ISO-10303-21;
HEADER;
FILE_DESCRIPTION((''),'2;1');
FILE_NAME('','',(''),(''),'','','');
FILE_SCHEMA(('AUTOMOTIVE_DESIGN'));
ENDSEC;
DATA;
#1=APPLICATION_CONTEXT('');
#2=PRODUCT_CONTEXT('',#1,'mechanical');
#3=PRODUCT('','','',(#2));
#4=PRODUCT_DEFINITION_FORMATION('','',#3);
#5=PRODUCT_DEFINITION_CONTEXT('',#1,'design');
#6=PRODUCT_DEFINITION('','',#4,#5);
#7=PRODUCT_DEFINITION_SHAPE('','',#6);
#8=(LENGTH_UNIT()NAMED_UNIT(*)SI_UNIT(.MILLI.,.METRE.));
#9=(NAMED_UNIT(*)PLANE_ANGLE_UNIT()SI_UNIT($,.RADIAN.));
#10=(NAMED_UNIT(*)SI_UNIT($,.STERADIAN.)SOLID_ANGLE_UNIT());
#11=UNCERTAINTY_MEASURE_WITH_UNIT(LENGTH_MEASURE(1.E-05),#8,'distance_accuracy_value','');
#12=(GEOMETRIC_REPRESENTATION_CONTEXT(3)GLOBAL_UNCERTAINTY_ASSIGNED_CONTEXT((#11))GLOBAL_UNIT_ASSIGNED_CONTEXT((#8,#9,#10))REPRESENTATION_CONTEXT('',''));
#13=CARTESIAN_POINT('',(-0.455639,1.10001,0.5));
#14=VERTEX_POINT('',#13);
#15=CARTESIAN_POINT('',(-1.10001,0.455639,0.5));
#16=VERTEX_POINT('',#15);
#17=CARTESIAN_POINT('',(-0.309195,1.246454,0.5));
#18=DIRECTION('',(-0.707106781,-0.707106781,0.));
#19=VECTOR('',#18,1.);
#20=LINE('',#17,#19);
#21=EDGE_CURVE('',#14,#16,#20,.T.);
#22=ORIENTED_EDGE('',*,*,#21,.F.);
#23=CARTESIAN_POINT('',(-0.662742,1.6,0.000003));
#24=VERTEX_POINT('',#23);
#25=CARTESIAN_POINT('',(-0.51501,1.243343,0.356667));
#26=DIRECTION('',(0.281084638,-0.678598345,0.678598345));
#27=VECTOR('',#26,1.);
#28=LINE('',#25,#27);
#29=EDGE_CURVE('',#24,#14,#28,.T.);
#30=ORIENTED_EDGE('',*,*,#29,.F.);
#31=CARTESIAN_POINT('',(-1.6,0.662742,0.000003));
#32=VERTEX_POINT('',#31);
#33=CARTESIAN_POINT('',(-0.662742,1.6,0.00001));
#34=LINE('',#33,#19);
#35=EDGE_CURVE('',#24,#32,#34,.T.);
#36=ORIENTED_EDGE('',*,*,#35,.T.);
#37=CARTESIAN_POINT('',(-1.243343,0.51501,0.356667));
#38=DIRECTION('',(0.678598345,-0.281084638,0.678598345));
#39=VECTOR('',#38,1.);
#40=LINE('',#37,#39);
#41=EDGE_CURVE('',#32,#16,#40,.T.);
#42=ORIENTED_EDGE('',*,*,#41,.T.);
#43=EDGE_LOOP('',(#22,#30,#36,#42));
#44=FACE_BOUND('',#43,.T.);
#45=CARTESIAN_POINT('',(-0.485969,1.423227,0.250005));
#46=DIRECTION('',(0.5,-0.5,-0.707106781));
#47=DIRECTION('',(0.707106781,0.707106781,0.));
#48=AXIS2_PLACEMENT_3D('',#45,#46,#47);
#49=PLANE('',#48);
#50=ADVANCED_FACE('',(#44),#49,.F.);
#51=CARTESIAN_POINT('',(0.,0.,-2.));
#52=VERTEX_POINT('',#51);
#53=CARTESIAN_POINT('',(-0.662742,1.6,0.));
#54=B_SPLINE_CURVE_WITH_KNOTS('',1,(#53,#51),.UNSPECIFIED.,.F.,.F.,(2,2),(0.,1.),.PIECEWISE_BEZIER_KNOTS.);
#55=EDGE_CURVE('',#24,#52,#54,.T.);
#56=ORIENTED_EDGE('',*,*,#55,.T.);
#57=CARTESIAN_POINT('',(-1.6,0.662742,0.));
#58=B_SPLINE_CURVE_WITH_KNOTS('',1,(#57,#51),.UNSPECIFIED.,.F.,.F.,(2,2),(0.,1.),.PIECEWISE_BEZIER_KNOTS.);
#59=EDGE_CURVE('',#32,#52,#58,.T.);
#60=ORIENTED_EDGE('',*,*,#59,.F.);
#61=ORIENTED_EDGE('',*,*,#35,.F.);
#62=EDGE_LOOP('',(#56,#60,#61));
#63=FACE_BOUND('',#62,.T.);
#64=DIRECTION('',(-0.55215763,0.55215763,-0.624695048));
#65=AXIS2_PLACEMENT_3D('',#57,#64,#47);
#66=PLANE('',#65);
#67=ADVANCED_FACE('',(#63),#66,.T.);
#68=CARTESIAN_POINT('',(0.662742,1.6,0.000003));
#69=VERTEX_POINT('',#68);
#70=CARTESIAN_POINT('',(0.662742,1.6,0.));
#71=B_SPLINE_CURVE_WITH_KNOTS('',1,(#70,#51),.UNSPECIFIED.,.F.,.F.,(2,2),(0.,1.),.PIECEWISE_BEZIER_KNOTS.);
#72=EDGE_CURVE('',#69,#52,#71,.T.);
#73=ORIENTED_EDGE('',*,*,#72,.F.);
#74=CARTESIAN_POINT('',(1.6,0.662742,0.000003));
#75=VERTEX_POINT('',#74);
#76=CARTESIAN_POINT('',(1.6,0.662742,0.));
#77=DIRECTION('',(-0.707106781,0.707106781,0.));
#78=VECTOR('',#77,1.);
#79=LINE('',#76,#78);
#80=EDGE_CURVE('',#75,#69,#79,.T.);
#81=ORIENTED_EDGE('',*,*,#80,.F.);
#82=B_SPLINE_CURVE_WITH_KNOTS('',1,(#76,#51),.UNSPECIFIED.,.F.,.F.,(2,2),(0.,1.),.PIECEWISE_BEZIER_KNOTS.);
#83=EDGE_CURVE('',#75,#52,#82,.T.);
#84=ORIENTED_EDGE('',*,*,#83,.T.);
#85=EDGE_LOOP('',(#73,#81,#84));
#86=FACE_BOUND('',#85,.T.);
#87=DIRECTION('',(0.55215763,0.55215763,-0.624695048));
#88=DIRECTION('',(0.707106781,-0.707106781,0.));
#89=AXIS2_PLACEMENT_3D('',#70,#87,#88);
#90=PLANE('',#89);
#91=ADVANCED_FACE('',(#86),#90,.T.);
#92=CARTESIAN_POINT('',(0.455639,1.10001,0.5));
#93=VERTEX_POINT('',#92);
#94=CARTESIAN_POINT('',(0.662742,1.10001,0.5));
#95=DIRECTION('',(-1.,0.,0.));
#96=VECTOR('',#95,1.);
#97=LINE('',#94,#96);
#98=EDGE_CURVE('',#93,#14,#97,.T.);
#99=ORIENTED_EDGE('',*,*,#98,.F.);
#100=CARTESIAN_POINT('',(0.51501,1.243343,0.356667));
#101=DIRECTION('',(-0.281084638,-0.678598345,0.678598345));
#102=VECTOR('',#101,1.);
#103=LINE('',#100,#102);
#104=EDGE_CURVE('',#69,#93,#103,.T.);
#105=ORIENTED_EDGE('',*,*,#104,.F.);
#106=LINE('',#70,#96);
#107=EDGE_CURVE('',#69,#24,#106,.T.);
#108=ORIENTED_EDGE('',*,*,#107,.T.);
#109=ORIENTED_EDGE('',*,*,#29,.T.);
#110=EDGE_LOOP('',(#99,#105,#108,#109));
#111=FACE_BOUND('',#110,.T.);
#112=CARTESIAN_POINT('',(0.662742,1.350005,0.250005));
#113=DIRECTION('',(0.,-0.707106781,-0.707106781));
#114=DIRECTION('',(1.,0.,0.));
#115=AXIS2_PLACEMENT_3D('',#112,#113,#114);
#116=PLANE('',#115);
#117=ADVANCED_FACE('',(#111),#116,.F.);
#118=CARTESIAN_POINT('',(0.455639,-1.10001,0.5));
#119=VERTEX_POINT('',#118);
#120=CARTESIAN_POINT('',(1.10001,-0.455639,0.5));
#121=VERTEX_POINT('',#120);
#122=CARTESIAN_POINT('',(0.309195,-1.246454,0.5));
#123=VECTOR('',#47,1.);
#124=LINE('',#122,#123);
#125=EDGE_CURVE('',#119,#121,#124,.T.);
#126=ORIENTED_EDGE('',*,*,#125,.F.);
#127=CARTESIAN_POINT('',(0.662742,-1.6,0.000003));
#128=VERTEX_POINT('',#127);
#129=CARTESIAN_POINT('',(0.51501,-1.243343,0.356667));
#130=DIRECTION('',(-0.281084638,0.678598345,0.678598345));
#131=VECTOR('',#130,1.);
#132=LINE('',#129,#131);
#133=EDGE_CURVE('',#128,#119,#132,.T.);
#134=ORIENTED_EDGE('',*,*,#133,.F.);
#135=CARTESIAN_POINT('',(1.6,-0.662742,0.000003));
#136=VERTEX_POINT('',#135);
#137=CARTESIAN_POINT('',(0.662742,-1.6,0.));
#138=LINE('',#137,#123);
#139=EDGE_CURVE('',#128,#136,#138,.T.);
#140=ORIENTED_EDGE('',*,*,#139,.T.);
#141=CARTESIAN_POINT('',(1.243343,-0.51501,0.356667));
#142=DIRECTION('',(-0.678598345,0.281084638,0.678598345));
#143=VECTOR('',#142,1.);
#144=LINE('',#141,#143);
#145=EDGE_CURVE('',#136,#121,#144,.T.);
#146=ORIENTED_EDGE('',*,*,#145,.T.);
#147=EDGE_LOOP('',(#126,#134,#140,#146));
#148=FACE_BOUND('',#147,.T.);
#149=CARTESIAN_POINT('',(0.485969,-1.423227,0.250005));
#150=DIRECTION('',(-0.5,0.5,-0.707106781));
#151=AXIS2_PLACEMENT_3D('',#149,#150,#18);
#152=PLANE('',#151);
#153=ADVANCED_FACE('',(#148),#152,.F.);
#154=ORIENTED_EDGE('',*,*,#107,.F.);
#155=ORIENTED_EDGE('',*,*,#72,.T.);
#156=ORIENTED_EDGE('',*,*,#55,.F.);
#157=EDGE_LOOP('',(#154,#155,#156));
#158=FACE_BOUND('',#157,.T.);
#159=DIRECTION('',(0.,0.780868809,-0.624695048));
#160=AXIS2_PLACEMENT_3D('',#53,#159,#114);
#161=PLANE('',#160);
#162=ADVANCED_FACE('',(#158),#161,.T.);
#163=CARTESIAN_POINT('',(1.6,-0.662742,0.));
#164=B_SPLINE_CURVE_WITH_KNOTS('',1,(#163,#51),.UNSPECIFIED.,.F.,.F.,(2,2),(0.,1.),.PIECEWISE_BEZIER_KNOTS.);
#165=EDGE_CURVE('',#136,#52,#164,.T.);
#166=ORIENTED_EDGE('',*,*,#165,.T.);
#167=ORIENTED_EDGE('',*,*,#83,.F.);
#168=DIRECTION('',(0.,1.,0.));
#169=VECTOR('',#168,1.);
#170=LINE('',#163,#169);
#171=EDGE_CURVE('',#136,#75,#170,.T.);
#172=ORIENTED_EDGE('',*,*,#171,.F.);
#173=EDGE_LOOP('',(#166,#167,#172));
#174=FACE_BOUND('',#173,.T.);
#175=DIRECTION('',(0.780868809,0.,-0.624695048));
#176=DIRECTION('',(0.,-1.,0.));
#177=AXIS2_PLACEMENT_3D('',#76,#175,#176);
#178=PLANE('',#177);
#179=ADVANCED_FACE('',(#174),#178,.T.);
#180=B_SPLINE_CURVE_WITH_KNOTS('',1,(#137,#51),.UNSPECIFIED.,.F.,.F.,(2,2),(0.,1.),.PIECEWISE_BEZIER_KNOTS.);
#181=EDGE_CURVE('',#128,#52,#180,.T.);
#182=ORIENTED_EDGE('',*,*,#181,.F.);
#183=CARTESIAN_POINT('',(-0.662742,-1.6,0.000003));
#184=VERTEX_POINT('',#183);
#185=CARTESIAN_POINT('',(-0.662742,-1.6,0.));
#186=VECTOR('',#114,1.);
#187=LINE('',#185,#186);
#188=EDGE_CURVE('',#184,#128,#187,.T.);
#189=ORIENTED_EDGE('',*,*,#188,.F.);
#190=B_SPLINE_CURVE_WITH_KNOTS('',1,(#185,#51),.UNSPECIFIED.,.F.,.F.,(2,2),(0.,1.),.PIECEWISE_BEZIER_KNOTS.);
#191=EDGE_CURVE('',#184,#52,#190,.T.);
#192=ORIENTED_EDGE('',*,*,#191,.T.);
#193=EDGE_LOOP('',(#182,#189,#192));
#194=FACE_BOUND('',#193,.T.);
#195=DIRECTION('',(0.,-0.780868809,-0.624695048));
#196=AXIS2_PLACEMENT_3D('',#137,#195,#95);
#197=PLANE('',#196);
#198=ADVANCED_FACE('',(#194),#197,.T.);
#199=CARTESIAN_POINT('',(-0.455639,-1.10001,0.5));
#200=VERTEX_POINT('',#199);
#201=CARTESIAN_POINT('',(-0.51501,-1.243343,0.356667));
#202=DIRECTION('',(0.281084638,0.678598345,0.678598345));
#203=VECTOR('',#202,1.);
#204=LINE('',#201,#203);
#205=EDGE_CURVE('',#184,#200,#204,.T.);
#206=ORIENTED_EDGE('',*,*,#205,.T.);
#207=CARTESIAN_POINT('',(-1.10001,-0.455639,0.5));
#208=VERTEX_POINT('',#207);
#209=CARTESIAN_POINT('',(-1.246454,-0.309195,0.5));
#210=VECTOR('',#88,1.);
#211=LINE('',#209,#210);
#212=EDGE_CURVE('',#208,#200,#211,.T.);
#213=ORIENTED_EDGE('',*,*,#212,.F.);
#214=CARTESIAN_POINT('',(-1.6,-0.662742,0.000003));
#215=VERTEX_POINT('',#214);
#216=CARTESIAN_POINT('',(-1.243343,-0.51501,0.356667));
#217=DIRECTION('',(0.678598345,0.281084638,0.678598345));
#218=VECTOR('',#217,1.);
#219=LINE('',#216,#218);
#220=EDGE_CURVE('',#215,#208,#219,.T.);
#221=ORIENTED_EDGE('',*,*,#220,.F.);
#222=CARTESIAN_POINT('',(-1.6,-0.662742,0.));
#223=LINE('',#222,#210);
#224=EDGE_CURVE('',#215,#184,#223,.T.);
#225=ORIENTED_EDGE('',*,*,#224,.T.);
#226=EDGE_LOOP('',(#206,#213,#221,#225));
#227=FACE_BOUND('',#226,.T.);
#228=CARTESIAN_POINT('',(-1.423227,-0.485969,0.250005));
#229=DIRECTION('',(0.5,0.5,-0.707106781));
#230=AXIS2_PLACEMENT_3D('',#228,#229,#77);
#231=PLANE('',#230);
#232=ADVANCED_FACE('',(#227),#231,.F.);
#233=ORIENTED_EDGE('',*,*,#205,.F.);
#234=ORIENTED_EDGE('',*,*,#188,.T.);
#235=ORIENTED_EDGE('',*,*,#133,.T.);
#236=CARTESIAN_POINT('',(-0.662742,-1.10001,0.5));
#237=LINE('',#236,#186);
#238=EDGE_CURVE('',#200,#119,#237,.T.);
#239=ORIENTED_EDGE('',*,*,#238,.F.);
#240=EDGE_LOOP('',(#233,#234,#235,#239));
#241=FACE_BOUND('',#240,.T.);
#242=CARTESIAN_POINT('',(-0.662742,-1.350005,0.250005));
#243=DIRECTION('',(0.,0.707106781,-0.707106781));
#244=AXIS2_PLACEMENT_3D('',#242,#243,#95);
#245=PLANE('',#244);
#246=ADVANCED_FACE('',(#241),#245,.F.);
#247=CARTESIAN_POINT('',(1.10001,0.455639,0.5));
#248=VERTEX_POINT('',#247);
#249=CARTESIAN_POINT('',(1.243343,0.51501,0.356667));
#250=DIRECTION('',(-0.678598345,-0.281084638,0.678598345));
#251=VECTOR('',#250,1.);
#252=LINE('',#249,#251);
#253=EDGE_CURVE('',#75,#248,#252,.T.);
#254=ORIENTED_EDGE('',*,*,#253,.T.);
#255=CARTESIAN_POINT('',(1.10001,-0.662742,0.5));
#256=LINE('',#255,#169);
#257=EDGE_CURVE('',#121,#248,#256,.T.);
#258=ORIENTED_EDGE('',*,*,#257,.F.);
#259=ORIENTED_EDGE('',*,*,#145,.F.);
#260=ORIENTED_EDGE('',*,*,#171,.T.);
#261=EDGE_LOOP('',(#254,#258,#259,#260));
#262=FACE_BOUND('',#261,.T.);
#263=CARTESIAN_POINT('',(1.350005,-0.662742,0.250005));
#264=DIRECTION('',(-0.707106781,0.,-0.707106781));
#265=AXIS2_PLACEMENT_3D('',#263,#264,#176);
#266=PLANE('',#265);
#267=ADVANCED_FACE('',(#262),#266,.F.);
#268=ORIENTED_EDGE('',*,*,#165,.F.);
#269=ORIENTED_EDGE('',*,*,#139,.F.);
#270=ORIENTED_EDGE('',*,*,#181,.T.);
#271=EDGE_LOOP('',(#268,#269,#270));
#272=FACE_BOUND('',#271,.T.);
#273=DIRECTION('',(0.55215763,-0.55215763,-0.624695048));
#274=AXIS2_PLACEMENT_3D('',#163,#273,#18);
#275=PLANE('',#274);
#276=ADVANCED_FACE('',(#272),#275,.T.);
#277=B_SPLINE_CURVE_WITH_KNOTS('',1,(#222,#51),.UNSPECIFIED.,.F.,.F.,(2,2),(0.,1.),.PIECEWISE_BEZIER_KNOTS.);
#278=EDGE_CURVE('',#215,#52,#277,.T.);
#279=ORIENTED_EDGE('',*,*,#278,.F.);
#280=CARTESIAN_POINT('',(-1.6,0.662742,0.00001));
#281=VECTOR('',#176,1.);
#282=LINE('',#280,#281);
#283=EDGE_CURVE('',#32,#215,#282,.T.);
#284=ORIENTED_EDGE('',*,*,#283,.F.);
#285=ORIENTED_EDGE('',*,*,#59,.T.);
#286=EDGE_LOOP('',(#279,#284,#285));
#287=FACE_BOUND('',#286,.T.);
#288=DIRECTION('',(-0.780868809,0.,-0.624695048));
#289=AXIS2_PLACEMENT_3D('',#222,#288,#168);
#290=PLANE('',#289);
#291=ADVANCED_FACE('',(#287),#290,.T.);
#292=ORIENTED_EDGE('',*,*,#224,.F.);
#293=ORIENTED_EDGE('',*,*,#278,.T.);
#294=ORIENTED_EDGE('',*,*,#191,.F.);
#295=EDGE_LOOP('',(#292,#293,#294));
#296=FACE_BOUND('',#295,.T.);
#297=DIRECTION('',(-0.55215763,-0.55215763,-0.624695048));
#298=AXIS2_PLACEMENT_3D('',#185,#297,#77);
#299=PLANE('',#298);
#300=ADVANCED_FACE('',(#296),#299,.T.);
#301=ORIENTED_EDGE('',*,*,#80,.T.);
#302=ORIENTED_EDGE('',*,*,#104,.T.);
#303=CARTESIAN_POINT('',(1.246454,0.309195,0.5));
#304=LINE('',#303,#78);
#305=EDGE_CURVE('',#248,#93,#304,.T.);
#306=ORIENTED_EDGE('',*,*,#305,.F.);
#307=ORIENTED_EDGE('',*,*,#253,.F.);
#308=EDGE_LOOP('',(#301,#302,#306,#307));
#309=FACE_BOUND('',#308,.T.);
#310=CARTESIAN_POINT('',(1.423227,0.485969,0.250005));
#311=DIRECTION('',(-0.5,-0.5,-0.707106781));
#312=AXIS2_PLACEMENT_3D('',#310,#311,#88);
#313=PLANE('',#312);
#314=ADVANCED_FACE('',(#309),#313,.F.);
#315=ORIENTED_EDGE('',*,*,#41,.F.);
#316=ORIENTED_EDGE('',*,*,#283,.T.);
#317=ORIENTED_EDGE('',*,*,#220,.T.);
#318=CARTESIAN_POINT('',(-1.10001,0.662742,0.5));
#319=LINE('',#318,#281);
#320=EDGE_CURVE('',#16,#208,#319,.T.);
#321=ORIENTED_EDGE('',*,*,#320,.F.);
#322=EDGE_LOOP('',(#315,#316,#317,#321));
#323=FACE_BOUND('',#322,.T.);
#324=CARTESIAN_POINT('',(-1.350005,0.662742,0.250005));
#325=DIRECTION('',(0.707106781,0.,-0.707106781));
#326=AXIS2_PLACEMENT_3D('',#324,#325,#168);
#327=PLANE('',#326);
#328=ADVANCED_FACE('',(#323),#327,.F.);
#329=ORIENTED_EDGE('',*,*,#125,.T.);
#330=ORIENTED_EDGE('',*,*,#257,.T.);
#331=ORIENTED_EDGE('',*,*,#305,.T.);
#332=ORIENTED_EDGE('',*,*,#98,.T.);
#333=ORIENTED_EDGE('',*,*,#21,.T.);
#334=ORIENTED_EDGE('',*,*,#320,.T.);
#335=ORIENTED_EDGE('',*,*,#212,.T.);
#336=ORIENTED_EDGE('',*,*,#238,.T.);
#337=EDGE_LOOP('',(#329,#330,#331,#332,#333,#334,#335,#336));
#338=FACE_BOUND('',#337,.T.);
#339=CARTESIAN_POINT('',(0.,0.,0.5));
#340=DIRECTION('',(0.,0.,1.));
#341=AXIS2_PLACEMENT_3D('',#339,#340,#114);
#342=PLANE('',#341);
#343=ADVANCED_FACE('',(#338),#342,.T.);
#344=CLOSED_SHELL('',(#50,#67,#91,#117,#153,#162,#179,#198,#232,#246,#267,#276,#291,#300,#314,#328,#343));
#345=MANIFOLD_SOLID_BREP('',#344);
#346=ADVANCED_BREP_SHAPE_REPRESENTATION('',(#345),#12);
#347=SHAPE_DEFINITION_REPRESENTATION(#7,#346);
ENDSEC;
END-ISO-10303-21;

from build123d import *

# Parameters (mm, degrees)
F1_DEPTH = 0.5
F2_SIZE2 = 0.49999
F2_SIZE  = 0.49999


# Not quite as in the source:
# - a fillet or chamfer is up to 0.001 mm smaller than in the source, because OpenCascade refuses the exact size


with BuildPart() as f1:
    # F0 (on Top) → F1 (new body)
    with BuildSketch(Plane.XY):
        Polygon((-1.6, 0.6627416998), (-1.6, -0.6627416998), (-0.6627416998, -1.6), (0.6627416998, -1.6), (1.6, -0.6627416998), (1.6, 0.6627416998), (0.6627416998, 1.6), (-0.6627416998, 1.6), align=None)
    extrude(amount=F1_DEPTH)

    # F2 (size 0.5 and 0.5 in the source; OpenCascade refuses exactly that, so slightly less here)
    f2_edges = [f1.edges().sort_by_distance(p)[0] for p in [
        (-1.131371, 1.131371, 0.5),
        (-1.6, 0, 0.5),
        (-1.131371, -1.131371, 0.5),
        (0, -1.6, 0.5),
        (1.131371, -1.131371, 0.5),
        (1.6, 0, 0.5),
        (1.131371, 1.131371, 0.5),
        (0, 1.6, 0.5),
    ]]
    chamfer(f2_edges, length=F2_SIZE, length2=F2_SIZE2)

    # F1_face (on face) → F5 section 0
    with BuildSketch(Plane(origin=(0, 0, 0), x_dir=(1, 0, 0), z_dir=(0, 0, -1)), mode=Mode.PRIVATE) as f5_s0:
        Polygon((-1.6, -0.6627416998), (-0.6627416998, -1.6), (0.6627416998, -1.6), (1.6, -0.6627416998), (1.6, 0.6627416998), (0.6627416998, 1.6), (-0.6627416998, 1.6), (-1.6, 0.6627416998), align=None)
    loft([f5_s0.sketch, Vertex(0, 0, -2)])


solid = f1.part
